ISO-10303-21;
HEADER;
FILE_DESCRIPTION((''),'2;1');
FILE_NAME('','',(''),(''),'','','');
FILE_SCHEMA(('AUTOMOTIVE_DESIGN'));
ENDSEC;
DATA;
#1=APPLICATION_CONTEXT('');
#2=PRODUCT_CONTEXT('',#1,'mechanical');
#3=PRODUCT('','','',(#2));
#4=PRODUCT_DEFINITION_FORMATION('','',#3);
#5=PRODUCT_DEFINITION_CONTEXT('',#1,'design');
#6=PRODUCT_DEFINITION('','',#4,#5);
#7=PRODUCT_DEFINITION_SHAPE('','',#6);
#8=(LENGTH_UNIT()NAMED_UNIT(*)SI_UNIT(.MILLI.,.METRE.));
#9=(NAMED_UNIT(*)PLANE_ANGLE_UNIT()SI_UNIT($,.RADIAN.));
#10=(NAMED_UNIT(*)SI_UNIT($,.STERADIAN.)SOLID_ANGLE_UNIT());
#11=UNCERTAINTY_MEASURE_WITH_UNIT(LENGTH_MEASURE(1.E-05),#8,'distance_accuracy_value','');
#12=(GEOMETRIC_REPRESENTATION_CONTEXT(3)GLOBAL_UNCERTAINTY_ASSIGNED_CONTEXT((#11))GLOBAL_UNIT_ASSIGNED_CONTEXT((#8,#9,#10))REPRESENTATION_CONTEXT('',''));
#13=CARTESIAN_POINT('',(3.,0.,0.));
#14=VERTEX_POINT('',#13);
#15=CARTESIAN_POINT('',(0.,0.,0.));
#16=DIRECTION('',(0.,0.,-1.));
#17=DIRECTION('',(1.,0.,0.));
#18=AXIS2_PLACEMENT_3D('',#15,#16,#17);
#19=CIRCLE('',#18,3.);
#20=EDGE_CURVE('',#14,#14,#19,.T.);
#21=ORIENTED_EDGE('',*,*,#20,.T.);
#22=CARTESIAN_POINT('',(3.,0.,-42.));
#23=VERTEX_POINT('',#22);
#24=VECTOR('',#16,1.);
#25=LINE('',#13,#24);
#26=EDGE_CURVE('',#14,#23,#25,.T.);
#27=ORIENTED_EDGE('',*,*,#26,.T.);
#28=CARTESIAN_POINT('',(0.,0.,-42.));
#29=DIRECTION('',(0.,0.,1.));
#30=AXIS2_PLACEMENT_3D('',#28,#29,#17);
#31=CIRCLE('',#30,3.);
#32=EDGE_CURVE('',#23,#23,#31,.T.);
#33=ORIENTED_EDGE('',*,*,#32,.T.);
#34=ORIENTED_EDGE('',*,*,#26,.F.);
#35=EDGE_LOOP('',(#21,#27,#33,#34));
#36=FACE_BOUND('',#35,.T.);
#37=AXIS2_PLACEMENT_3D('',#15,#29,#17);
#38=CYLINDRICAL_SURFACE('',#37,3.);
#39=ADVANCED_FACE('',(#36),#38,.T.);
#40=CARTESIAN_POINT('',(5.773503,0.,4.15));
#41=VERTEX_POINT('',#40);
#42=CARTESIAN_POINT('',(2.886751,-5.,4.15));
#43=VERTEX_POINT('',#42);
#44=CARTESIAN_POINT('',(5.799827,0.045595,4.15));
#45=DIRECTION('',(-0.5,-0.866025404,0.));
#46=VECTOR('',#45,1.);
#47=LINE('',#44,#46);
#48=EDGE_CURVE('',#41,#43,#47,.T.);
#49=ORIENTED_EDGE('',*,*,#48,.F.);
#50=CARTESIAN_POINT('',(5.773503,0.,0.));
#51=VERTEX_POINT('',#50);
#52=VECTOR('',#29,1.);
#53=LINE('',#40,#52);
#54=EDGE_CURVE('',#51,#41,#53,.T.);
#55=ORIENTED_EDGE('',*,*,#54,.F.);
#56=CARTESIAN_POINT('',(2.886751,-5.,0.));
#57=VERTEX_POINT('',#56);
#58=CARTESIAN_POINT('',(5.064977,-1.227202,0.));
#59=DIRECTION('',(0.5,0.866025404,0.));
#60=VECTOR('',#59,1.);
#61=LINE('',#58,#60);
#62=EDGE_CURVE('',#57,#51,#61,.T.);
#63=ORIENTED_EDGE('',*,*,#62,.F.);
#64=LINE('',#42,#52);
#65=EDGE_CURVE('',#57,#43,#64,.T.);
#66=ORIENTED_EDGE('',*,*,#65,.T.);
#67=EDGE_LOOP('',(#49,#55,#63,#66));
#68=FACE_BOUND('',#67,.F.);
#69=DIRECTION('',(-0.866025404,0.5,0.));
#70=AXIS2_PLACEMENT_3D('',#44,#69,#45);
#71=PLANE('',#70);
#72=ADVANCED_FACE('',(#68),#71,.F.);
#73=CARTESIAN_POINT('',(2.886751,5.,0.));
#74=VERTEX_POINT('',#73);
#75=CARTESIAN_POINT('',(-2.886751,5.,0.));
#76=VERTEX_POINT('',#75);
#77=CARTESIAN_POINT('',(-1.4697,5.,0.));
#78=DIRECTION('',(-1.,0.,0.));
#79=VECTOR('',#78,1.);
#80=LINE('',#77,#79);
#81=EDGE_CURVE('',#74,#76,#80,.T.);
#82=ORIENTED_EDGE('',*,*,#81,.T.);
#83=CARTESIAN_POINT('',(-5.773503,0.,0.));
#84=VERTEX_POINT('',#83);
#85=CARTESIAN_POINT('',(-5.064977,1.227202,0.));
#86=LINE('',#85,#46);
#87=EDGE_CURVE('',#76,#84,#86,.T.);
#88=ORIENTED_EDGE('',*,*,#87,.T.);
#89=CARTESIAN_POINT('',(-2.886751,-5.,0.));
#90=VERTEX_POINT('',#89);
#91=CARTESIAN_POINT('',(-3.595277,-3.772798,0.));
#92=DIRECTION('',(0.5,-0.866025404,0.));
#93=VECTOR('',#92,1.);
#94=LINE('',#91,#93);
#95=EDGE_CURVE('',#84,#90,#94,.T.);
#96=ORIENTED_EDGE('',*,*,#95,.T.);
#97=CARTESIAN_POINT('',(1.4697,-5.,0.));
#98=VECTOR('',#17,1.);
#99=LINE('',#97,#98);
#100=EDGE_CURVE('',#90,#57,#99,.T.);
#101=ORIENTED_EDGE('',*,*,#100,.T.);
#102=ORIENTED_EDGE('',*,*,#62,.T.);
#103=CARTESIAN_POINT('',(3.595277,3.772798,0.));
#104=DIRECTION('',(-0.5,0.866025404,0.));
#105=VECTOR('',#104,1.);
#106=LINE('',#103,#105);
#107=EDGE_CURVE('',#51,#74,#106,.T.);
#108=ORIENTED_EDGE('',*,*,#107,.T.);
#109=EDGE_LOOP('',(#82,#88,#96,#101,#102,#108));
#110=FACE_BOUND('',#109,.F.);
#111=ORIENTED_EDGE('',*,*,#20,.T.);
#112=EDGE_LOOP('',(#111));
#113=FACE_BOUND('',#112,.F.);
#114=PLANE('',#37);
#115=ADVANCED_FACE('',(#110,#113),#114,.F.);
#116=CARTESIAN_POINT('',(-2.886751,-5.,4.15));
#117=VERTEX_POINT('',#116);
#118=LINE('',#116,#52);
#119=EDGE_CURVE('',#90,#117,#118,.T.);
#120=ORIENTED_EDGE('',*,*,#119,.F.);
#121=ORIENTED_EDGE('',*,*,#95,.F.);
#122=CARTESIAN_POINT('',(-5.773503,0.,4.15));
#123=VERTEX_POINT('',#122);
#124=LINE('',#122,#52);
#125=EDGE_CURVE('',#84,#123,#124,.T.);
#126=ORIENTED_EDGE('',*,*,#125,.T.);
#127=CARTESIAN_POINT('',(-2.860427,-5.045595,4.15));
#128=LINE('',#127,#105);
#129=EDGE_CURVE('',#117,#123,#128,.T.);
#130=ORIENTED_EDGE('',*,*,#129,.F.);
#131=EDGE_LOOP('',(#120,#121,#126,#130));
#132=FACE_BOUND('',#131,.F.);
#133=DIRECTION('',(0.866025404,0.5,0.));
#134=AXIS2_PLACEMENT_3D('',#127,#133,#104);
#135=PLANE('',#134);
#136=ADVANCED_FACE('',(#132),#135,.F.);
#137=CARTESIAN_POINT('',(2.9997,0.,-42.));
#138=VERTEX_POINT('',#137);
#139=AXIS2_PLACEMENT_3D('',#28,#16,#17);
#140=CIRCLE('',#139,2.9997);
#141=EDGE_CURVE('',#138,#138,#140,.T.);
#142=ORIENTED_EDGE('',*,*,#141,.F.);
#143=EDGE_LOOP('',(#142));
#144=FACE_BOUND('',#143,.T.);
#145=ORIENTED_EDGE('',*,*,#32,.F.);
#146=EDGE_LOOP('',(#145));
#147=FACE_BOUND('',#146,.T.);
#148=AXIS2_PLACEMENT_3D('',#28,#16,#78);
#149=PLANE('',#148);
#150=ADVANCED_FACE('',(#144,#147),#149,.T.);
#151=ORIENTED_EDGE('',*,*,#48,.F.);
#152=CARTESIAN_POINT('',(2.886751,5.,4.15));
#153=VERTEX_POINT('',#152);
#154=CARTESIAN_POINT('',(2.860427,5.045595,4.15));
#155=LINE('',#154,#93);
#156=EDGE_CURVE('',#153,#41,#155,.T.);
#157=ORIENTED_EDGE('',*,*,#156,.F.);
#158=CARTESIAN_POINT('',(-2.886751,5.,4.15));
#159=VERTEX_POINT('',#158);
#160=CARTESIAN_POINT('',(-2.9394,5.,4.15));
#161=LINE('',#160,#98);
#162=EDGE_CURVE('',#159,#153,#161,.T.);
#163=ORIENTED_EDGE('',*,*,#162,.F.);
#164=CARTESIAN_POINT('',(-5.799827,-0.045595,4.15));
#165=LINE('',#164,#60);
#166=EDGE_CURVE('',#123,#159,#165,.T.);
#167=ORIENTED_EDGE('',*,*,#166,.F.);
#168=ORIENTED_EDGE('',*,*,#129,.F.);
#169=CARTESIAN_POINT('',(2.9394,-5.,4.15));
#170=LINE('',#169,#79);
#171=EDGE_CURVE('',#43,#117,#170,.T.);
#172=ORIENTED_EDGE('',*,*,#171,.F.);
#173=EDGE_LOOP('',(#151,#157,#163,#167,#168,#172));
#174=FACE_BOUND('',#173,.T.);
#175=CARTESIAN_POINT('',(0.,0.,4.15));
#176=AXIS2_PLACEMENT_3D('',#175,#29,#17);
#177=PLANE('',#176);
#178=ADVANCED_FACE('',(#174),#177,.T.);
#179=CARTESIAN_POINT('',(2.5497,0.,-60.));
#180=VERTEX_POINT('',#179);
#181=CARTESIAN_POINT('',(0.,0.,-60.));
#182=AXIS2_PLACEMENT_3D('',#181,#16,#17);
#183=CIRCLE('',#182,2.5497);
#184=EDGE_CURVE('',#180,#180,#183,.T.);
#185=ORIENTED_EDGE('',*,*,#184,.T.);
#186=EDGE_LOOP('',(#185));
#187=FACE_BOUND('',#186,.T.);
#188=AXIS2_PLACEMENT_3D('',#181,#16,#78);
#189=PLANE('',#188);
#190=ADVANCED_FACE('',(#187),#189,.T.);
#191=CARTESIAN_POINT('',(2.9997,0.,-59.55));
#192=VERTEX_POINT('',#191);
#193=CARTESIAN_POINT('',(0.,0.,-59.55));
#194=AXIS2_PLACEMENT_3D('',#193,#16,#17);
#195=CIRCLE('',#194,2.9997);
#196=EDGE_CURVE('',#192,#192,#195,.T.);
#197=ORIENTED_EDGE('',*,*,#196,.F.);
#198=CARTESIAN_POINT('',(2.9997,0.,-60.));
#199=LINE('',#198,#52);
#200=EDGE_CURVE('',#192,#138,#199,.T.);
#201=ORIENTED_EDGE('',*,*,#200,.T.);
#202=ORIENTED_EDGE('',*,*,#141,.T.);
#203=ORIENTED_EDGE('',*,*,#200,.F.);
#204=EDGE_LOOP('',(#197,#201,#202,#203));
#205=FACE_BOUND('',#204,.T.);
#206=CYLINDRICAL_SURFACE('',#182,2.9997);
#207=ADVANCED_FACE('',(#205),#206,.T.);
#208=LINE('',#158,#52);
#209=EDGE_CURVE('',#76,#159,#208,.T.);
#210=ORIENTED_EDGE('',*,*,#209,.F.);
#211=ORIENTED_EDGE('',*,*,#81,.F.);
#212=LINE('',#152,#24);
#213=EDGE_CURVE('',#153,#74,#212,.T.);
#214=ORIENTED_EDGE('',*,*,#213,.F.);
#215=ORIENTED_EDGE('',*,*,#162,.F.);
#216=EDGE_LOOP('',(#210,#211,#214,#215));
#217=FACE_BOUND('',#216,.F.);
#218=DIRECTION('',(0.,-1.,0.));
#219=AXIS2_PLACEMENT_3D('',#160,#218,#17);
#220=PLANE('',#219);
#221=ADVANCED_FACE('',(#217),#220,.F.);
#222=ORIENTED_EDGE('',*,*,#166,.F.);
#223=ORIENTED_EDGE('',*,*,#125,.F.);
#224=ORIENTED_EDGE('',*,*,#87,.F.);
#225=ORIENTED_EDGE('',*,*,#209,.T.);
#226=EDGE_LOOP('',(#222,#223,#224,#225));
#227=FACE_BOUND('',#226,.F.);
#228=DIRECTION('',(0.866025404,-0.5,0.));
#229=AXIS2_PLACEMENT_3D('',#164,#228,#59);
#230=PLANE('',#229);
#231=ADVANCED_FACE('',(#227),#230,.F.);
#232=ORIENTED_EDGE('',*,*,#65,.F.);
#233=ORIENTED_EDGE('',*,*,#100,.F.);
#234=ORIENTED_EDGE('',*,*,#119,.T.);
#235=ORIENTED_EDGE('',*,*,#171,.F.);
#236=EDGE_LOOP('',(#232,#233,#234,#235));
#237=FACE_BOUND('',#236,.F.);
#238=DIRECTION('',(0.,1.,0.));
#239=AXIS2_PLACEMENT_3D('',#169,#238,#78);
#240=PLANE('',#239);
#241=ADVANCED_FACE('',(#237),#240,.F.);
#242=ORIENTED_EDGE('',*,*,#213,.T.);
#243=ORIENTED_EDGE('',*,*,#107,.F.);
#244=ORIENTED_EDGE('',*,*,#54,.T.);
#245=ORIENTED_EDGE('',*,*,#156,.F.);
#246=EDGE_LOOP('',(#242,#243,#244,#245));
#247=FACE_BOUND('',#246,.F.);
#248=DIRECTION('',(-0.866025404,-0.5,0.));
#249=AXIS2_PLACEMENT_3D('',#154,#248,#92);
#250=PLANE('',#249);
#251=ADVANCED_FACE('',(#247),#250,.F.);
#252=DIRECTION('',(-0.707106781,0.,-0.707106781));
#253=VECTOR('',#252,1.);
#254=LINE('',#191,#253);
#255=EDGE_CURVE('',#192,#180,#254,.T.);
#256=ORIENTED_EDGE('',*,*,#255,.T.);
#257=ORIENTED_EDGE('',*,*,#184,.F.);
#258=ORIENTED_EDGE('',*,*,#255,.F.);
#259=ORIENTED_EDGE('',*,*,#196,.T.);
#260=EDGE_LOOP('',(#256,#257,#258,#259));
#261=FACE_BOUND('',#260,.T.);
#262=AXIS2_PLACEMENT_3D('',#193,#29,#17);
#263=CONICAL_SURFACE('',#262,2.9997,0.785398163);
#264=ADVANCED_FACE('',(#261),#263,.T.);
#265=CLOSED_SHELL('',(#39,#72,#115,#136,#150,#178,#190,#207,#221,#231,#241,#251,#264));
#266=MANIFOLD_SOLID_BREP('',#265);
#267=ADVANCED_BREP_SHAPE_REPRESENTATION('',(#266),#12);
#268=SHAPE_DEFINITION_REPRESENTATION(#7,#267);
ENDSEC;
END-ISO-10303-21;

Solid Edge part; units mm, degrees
sketch "Sketch1" plane through (0, 0, 0) normal (0, 0, 1) x (1, 0, 0)
  circle A0 centre (0, 0) radius 5.8
  dimension "D1" = 11.6
extrude "Protrusion1" add sketch "Sketch1" along normal blind 4.15
sketch "Sketch2" plane through (0, 0, 0) normal (0, 0, -1) x (1, 0, 0)
  circle A0 centre (0, 0) radius 3
extrude "Protrusion2" add sketch "Sketch2" along normal blind 60
sketch "Sketch3" plane through (0, 0, -60) normal (0, 0, -1) x (1, 0, 0)
  circle A0 centre (0, 0) radius 2.9997
extrude "Cutout1" cut sketch "Sketch3" against normal blind 18 flip side to cut
chamfer "Chamfer_1" distance 0.45 angle 45 1 edges at (-2.9997, 0, -60)
sketch "Sketch4" plane through (0, 0, 4.15) normal (0, 0, 1) x (1, 0, 0)
  line L0 (-2.9394, 5) -> (2.9394, 5)
  dimension "D1" = 10
extrude "Cutout2" cut sketch "Sketch4" against normal up to next material side at (0, 5.05, 4.15)
pattern_circular "Pattern1" count 6 over 360 about axis through (0, 0, 4.15) along (0, 0, 1) of "Cutout2"
properties part number "118845"
